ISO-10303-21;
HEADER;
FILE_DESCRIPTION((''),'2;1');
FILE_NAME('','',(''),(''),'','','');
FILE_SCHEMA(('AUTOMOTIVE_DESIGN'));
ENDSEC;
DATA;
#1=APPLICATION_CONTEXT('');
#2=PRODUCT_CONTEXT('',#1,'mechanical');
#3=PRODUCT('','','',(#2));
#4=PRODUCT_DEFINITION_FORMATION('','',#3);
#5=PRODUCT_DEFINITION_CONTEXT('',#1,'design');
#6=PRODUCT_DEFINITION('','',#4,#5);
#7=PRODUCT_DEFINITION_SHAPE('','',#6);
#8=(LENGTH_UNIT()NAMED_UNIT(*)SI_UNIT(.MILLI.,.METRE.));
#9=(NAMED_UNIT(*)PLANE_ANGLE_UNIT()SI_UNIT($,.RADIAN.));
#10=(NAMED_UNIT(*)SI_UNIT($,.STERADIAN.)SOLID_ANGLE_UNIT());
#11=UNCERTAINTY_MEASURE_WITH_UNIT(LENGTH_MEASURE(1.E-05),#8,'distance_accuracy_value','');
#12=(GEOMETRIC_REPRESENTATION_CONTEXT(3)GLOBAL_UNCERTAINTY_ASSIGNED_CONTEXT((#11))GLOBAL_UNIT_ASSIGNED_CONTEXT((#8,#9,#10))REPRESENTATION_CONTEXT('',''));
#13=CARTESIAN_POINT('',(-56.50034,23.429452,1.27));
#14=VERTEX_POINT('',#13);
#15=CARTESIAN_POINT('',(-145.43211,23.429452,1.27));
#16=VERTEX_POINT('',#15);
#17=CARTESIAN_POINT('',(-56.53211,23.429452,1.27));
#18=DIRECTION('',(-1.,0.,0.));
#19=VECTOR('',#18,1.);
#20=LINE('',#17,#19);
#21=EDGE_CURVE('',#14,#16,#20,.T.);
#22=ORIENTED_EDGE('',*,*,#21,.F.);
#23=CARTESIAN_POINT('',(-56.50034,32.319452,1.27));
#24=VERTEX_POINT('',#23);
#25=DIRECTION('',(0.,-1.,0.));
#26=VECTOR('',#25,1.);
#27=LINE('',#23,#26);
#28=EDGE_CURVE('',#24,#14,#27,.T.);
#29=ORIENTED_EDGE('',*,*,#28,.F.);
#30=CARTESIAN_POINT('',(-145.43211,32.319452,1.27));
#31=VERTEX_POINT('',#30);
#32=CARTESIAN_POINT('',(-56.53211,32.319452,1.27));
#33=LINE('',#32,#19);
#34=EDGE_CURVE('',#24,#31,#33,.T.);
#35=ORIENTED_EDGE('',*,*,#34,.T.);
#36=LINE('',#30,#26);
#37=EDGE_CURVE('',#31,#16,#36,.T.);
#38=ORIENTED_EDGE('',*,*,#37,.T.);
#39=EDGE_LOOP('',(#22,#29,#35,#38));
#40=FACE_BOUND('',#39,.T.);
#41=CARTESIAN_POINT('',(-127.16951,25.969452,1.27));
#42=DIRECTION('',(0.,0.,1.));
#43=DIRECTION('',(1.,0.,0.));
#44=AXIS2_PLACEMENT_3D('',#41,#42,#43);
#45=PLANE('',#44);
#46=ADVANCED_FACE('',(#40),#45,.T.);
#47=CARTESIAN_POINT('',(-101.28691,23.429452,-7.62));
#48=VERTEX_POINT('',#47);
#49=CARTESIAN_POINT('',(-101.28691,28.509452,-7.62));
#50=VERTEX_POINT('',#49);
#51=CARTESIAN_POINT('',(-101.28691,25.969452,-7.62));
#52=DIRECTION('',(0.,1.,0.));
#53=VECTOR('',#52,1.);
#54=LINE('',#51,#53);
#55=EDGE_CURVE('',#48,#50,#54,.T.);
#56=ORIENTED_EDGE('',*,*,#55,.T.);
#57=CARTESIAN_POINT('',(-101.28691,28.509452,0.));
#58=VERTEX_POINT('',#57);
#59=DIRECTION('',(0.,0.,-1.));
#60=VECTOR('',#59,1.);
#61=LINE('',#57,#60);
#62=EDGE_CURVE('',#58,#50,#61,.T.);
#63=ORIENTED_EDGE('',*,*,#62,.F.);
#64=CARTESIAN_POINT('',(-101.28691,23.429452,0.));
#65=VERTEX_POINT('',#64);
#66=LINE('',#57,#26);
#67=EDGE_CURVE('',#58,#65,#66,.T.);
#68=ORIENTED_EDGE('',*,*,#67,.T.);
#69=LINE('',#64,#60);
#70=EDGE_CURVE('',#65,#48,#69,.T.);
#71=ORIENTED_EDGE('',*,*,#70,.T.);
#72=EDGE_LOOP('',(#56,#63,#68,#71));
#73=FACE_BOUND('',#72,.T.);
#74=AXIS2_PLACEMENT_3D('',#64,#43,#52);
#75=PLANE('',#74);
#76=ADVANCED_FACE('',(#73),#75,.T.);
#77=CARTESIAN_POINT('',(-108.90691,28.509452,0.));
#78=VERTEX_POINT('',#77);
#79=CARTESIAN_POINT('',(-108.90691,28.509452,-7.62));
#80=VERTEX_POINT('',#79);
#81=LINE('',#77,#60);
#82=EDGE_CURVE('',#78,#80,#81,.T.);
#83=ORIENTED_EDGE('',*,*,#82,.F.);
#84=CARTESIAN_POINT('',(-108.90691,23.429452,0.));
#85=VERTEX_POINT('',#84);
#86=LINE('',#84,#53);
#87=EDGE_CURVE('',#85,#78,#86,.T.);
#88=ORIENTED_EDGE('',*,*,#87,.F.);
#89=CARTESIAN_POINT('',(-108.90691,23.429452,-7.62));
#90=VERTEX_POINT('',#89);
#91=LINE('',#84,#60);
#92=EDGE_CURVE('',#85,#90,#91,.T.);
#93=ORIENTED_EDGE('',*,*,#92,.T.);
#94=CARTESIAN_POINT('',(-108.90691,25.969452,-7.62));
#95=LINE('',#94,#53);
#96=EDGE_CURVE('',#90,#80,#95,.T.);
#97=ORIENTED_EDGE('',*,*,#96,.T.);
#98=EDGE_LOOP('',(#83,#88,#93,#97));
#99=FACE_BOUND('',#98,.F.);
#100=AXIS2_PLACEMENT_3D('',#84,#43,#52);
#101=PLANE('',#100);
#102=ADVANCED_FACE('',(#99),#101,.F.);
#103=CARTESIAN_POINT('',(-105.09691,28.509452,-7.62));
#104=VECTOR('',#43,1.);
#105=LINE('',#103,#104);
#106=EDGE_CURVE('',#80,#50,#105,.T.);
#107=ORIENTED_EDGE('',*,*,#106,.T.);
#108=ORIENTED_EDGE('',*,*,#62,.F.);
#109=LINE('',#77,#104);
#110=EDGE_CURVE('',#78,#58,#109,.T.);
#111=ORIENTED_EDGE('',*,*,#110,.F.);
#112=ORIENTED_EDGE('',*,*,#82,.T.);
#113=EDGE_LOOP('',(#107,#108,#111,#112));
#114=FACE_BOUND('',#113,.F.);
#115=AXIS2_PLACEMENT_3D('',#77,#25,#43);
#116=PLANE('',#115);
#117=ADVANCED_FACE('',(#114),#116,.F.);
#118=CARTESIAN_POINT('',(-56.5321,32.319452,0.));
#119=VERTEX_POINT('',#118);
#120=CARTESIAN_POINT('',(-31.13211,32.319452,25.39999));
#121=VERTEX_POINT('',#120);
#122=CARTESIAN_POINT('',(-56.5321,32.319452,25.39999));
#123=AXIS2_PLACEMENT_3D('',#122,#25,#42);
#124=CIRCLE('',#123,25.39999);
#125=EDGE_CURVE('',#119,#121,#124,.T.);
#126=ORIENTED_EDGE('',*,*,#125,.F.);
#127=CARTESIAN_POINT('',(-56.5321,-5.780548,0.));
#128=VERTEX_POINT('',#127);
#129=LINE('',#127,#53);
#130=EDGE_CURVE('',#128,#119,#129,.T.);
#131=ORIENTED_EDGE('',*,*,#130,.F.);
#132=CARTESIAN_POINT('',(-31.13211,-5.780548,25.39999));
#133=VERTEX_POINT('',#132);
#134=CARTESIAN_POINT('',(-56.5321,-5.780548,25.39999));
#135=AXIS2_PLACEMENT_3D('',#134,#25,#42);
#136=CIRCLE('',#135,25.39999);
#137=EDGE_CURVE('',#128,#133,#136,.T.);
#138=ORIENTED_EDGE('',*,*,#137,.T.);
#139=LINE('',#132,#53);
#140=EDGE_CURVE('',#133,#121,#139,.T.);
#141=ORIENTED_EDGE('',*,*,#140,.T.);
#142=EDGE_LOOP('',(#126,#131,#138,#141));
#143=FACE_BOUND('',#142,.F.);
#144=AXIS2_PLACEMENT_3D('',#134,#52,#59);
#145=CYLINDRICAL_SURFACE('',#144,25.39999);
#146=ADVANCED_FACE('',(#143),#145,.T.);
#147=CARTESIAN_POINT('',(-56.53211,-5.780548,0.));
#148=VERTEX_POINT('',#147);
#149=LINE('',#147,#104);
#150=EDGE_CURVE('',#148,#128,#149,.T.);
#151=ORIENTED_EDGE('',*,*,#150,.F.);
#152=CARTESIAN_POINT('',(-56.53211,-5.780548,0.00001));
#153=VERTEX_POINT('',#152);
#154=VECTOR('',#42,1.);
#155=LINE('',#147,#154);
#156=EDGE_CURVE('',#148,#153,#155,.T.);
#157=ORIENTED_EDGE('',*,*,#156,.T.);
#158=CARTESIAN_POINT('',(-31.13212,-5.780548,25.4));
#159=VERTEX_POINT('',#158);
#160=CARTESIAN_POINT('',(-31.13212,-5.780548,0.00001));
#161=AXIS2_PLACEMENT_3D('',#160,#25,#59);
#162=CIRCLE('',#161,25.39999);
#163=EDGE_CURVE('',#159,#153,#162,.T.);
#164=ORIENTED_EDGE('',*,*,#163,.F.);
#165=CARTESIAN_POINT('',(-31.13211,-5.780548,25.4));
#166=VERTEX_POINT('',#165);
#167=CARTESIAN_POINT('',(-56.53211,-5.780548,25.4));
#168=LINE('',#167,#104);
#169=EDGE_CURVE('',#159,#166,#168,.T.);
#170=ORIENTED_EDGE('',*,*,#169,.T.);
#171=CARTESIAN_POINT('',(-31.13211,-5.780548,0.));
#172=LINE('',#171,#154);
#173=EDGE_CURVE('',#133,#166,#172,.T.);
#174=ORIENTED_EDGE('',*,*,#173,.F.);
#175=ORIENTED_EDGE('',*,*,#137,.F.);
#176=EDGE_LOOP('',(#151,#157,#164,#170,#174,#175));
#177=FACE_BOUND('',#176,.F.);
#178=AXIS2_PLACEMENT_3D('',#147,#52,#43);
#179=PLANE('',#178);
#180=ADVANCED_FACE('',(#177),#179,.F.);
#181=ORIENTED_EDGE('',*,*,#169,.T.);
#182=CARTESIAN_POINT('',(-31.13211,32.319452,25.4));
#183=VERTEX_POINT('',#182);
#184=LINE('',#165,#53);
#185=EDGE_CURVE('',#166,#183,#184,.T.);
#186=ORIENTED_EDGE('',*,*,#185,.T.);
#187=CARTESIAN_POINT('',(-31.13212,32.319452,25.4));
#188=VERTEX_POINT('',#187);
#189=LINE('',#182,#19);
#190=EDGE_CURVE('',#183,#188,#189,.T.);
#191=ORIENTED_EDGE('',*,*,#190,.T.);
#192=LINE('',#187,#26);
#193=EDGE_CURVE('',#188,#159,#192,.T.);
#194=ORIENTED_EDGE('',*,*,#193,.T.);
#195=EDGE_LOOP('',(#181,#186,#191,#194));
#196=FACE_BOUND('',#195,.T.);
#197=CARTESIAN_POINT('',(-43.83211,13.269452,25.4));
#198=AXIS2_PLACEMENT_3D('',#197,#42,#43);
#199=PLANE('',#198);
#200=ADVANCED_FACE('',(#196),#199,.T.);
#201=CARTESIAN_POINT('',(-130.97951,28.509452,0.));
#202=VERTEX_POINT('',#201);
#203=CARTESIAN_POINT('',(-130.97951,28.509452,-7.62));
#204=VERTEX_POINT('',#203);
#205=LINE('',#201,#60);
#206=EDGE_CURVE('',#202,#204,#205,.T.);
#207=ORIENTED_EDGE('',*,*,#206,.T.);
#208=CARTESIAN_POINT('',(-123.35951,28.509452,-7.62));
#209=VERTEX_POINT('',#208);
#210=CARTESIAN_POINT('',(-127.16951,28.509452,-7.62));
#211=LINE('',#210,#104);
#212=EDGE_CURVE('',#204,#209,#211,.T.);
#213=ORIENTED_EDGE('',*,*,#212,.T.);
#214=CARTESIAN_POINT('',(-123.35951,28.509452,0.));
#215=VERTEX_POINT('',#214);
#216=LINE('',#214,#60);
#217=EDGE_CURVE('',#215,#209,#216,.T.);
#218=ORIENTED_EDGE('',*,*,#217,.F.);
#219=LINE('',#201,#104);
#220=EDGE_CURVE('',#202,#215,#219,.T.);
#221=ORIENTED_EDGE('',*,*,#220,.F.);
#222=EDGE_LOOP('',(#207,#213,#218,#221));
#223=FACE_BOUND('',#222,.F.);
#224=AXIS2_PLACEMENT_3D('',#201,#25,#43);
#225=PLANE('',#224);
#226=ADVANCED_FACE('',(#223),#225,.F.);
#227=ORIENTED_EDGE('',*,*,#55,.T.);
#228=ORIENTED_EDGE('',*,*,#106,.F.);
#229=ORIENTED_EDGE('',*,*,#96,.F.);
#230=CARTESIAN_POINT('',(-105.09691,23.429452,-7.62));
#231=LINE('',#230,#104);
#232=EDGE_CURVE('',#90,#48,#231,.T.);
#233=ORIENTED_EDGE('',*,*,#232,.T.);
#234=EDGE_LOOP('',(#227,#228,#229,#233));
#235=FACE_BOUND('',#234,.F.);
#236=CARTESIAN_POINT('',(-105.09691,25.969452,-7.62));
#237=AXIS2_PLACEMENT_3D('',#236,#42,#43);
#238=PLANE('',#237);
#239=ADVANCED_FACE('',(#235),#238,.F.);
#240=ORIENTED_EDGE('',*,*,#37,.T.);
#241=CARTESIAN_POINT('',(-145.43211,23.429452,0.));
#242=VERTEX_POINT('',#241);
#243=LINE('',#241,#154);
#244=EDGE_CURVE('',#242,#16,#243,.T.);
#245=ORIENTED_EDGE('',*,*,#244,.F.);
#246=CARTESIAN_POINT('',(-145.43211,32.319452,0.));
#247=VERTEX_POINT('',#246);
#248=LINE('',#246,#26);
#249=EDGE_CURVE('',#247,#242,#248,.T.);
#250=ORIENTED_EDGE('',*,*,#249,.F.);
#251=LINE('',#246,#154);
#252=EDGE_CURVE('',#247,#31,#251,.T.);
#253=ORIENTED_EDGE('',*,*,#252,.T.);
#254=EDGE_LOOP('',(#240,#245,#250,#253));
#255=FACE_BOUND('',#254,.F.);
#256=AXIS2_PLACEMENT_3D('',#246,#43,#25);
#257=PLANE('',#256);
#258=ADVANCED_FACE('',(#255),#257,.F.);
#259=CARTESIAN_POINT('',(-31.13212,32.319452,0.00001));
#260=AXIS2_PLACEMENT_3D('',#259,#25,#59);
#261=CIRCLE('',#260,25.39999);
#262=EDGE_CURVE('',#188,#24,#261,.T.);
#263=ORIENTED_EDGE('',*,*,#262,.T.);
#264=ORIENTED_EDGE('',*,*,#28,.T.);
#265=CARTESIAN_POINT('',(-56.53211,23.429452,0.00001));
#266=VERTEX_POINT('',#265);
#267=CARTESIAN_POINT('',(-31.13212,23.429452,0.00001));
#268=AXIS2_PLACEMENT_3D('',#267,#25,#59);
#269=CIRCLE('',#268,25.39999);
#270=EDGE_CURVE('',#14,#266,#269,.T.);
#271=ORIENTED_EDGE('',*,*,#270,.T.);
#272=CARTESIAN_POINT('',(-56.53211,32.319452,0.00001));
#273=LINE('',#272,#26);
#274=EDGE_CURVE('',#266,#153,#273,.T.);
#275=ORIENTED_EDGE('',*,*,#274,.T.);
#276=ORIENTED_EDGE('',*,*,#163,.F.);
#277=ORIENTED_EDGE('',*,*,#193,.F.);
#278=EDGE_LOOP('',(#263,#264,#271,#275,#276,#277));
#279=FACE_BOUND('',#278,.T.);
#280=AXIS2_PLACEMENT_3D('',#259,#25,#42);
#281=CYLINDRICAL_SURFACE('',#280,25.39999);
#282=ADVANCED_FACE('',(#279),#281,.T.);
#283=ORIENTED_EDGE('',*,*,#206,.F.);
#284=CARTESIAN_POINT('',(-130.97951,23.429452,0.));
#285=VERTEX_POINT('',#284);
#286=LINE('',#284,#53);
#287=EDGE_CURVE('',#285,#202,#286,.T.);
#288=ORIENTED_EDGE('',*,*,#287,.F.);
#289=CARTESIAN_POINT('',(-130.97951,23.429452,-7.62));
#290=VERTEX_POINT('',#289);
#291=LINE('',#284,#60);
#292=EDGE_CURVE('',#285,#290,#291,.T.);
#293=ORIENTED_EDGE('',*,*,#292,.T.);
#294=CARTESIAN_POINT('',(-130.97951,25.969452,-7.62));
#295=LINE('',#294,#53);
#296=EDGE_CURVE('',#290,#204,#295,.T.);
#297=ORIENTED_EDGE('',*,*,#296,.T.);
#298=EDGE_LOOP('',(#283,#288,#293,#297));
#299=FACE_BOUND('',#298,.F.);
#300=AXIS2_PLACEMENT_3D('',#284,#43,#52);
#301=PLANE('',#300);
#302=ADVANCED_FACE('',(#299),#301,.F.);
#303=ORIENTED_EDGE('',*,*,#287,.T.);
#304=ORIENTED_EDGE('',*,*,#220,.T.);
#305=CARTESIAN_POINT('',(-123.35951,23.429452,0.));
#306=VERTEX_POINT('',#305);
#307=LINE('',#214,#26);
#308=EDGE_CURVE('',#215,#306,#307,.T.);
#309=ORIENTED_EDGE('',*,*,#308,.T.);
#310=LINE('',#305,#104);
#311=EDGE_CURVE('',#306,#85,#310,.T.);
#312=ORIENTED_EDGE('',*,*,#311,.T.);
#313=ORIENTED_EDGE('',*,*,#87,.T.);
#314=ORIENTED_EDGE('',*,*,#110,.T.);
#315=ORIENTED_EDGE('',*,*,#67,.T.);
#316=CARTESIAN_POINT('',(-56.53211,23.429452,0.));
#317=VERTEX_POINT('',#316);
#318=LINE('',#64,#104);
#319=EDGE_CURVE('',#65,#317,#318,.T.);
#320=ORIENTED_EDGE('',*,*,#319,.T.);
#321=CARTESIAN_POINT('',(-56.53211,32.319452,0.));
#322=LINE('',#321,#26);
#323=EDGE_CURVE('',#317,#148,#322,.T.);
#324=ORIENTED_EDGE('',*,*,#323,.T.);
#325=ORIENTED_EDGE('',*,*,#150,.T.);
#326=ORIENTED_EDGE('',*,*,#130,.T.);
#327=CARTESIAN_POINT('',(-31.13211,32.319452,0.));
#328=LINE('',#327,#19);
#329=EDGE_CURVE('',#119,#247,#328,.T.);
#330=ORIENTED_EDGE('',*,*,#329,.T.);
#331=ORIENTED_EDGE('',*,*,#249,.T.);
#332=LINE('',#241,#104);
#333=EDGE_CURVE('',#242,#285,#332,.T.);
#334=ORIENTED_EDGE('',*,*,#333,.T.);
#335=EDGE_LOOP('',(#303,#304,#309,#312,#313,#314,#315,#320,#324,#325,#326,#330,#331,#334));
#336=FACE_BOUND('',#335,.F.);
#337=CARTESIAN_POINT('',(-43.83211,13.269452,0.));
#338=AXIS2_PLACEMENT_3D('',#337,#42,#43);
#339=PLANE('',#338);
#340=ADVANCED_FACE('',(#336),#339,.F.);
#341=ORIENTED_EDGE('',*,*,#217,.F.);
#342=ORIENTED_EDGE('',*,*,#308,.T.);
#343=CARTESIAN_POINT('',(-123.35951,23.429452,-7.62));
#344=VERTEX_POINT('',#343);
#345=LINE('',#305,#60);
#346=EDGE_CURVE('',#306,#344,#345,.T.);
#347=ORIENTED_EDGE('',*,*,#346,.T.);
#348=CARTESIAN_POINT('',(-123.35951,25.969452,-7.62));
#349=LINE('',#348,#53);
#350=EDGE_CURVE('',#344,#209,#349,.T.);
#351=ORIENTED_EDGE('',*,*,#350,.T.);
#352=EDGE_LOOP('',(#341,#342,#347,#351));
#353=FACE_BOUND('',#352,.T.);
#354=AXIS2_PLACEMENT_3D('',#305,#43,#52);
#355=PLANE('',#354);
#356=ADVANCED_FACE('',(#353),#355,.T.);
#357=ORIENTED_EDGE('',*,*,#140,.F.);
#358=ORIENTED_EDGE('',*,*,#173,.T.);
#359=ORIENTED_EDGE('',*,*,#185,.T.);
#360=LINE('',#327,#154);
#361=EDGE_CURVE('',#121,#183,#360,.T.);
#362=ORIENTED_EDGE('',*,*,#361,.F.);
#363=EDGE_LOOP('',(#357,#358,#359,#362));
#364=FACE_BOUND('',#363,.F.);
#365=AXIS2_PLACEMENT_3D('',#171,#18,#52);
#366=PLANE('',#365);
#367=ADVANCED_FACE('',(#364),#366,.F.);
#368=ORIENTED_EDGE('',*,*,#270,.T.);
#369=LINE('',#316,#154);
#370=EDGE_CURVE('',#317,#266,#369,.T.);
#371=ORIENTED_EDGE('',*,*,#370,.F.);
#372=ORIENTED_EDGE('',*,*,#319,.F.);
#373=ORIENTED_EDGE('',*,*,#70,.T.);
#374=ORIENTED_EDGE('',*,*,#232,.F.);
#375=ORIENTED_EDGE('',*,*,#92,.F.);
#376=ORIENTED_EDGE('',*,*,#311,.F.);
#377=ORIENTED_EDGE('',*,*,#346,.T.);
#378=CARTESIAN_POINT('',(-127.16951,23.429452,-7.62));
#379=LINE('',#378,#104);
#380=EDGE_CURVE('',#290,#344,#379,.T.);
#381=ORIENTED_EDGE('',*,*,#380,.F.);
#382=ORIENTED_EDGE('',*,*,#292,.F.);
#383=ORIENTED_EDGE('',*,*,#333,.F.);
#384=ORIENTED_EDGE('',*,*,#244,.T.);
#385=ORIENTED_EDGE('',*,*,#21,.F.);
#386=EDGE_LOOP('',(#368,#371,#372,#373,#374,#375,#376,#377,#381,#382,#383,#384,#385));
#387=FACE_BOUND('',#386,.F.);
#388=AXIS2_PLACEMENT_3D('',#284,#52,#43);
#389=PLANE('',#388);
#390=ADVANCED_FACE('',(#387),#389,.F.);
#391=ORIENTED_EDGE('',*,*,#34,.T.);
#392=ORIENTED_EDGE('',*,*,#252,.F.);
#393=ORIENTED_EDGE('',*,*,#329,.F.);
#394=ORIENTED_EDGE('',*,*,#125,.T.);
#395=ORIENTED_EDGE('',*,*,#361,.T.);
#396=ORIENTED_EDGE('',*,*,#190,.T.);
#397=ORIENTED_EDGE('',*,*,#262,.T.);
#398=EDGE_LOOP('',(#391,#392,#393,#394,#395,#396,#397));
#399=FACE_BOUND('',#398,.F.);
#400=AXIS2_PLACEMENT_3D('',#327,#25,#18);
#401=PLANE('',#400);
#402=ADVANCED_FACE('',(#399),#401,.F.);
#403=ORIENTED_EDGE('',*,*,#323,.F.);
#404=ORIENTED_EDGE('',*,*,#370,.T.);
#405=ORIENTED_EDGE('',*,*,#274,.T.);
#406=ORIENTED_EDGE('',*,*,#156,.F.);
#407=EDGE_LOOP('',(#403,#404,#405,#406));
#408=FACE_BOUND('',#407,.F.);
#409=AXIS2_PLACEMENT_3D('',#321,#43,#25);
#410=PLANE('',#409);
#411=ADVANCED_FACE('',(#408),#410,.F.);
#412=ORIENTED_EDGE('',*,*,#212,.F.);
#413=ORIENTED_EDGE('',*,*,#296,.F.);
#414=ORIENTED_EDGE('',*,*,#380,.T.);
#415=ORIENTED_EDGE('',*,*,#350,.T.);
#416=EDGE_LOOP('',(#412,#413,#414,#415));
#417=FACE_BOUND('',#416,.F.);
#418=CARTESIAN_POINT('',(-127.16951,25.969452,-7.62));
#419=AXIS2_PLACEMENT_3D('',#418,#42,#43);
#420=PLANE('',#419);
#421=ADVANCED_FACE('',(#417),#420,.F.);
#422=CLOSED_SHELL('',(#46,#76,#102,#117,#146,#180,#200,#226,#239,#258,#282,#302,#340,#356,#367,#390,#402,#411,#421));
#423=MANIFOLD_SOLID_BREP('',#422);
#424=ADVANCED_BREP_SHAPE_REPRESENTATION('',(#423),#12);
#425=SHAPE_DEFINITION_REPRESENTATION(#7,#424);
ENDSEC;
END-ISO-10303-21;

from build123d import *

# Parameters (mm, degrees)
F1_DEPTH = 1.27
F0_W     = 7.62
F0_H     = 5.08
F2_DEPTH = 7.62
F3_DEPTH = 1.27
F4_DEPTH = 25.4
F5_R     = 25.39999
F6_R     = 25.39999


# Not quite as in the source:
# - a fillet or chamfer is up to 0.001 mm smaller than in the source, because OpenCascade refuses the exact size


with BuildPart() as f1:
    # F0 (on Top) → F1 (new body)
    with BuildSketch(Plane.XY):
        Polygon((-56.5321096511, 32.319452062), (-145.4321096511, 32.319452062), (-145.4321096511, 23.429452062), (-130.9795096511, 23.429452062), (-130.9795096511, 28.509452062), (-123.3595096511, 28.509452062), (-123.3595096511, 23.429452062), (-108.9069096511, 23.429452062), (-108.9069096511, 28.509452062), (-101.2869096511, 28.509452062), (-101.2869096511, 23.429452062), (-56.5321096511, 23.429452062), align=None)
    extrude(amount=F1_DEPTH)



with BuildPart() as f2:
    # F0 (on Top) → F2 (new body)
    with BuildSketch(Plane.XY):
        with Locations((-127.1695096511, 25.969452062)):
            Rectangle(F0_W, F0_H)
    extrude(amount=-F2_DEPTH)


with BuildPart() as f2b:
    # F0 (on Top) → F2, piece 2 (new body)
    with BuildSketch(Plane.XY):
        with Locations((-105.0969096511, 25.969452062)):
            Rectangle(F0_W, F0_H)
    extrude(amount=-F2_DEPTH)


with BuildPart() as f1_1:
    add(f1.part)

    add(f2.part)  # F3 merges F2

    add(f2b.part)  # F3 merges F2b
    # F0 (on Top) → F3 (join)
    with BuildSketch(Plane.XY):
        with Locations((-127.1695096511, 25.969452062)):
            Rectangle(F0_W, F0_H)
        with Locations((-105.0969096511, 25.969452062)):
            Rectangle(F0_W, F0_H)
    extrude(amount=F3_DEPTH)

    # F0 (on Top) → F4 (join)
    with BuildSketch(Plane.XY):
        Polygon((-31.1321096511, 32.319452062), (-56.5321096511, 32.319452062), (-56.5321096511, 23.429452062), (-56.5321096511, -5.780547938), (-31.1321096511, -5.780547938), align=None)
    extrude(amount=F4_DEPTH)

    # F5 (radius 25.4 in the source; OpenCascade refuses exactly that, so slightly less here)
    f5_edges = [f1_1.edges().sort_by_distance(p)[0] for p in [
        (-31.13211, 13.269452, 0),
    ]]
    fillet(f5_edges, radius=F5_R)

    # F6 (radius 25.4 in the source; OpenCascade refuses exactly that, so slightly less here)
    f6_edges = [f1_1.edges().sort_by_distance(p)[0] for p in [
        (-56.53211, 13.269452, 25.4),
    ]]
    fillet(f6_edges, radius=F6_R)


solid = f1_1.part
